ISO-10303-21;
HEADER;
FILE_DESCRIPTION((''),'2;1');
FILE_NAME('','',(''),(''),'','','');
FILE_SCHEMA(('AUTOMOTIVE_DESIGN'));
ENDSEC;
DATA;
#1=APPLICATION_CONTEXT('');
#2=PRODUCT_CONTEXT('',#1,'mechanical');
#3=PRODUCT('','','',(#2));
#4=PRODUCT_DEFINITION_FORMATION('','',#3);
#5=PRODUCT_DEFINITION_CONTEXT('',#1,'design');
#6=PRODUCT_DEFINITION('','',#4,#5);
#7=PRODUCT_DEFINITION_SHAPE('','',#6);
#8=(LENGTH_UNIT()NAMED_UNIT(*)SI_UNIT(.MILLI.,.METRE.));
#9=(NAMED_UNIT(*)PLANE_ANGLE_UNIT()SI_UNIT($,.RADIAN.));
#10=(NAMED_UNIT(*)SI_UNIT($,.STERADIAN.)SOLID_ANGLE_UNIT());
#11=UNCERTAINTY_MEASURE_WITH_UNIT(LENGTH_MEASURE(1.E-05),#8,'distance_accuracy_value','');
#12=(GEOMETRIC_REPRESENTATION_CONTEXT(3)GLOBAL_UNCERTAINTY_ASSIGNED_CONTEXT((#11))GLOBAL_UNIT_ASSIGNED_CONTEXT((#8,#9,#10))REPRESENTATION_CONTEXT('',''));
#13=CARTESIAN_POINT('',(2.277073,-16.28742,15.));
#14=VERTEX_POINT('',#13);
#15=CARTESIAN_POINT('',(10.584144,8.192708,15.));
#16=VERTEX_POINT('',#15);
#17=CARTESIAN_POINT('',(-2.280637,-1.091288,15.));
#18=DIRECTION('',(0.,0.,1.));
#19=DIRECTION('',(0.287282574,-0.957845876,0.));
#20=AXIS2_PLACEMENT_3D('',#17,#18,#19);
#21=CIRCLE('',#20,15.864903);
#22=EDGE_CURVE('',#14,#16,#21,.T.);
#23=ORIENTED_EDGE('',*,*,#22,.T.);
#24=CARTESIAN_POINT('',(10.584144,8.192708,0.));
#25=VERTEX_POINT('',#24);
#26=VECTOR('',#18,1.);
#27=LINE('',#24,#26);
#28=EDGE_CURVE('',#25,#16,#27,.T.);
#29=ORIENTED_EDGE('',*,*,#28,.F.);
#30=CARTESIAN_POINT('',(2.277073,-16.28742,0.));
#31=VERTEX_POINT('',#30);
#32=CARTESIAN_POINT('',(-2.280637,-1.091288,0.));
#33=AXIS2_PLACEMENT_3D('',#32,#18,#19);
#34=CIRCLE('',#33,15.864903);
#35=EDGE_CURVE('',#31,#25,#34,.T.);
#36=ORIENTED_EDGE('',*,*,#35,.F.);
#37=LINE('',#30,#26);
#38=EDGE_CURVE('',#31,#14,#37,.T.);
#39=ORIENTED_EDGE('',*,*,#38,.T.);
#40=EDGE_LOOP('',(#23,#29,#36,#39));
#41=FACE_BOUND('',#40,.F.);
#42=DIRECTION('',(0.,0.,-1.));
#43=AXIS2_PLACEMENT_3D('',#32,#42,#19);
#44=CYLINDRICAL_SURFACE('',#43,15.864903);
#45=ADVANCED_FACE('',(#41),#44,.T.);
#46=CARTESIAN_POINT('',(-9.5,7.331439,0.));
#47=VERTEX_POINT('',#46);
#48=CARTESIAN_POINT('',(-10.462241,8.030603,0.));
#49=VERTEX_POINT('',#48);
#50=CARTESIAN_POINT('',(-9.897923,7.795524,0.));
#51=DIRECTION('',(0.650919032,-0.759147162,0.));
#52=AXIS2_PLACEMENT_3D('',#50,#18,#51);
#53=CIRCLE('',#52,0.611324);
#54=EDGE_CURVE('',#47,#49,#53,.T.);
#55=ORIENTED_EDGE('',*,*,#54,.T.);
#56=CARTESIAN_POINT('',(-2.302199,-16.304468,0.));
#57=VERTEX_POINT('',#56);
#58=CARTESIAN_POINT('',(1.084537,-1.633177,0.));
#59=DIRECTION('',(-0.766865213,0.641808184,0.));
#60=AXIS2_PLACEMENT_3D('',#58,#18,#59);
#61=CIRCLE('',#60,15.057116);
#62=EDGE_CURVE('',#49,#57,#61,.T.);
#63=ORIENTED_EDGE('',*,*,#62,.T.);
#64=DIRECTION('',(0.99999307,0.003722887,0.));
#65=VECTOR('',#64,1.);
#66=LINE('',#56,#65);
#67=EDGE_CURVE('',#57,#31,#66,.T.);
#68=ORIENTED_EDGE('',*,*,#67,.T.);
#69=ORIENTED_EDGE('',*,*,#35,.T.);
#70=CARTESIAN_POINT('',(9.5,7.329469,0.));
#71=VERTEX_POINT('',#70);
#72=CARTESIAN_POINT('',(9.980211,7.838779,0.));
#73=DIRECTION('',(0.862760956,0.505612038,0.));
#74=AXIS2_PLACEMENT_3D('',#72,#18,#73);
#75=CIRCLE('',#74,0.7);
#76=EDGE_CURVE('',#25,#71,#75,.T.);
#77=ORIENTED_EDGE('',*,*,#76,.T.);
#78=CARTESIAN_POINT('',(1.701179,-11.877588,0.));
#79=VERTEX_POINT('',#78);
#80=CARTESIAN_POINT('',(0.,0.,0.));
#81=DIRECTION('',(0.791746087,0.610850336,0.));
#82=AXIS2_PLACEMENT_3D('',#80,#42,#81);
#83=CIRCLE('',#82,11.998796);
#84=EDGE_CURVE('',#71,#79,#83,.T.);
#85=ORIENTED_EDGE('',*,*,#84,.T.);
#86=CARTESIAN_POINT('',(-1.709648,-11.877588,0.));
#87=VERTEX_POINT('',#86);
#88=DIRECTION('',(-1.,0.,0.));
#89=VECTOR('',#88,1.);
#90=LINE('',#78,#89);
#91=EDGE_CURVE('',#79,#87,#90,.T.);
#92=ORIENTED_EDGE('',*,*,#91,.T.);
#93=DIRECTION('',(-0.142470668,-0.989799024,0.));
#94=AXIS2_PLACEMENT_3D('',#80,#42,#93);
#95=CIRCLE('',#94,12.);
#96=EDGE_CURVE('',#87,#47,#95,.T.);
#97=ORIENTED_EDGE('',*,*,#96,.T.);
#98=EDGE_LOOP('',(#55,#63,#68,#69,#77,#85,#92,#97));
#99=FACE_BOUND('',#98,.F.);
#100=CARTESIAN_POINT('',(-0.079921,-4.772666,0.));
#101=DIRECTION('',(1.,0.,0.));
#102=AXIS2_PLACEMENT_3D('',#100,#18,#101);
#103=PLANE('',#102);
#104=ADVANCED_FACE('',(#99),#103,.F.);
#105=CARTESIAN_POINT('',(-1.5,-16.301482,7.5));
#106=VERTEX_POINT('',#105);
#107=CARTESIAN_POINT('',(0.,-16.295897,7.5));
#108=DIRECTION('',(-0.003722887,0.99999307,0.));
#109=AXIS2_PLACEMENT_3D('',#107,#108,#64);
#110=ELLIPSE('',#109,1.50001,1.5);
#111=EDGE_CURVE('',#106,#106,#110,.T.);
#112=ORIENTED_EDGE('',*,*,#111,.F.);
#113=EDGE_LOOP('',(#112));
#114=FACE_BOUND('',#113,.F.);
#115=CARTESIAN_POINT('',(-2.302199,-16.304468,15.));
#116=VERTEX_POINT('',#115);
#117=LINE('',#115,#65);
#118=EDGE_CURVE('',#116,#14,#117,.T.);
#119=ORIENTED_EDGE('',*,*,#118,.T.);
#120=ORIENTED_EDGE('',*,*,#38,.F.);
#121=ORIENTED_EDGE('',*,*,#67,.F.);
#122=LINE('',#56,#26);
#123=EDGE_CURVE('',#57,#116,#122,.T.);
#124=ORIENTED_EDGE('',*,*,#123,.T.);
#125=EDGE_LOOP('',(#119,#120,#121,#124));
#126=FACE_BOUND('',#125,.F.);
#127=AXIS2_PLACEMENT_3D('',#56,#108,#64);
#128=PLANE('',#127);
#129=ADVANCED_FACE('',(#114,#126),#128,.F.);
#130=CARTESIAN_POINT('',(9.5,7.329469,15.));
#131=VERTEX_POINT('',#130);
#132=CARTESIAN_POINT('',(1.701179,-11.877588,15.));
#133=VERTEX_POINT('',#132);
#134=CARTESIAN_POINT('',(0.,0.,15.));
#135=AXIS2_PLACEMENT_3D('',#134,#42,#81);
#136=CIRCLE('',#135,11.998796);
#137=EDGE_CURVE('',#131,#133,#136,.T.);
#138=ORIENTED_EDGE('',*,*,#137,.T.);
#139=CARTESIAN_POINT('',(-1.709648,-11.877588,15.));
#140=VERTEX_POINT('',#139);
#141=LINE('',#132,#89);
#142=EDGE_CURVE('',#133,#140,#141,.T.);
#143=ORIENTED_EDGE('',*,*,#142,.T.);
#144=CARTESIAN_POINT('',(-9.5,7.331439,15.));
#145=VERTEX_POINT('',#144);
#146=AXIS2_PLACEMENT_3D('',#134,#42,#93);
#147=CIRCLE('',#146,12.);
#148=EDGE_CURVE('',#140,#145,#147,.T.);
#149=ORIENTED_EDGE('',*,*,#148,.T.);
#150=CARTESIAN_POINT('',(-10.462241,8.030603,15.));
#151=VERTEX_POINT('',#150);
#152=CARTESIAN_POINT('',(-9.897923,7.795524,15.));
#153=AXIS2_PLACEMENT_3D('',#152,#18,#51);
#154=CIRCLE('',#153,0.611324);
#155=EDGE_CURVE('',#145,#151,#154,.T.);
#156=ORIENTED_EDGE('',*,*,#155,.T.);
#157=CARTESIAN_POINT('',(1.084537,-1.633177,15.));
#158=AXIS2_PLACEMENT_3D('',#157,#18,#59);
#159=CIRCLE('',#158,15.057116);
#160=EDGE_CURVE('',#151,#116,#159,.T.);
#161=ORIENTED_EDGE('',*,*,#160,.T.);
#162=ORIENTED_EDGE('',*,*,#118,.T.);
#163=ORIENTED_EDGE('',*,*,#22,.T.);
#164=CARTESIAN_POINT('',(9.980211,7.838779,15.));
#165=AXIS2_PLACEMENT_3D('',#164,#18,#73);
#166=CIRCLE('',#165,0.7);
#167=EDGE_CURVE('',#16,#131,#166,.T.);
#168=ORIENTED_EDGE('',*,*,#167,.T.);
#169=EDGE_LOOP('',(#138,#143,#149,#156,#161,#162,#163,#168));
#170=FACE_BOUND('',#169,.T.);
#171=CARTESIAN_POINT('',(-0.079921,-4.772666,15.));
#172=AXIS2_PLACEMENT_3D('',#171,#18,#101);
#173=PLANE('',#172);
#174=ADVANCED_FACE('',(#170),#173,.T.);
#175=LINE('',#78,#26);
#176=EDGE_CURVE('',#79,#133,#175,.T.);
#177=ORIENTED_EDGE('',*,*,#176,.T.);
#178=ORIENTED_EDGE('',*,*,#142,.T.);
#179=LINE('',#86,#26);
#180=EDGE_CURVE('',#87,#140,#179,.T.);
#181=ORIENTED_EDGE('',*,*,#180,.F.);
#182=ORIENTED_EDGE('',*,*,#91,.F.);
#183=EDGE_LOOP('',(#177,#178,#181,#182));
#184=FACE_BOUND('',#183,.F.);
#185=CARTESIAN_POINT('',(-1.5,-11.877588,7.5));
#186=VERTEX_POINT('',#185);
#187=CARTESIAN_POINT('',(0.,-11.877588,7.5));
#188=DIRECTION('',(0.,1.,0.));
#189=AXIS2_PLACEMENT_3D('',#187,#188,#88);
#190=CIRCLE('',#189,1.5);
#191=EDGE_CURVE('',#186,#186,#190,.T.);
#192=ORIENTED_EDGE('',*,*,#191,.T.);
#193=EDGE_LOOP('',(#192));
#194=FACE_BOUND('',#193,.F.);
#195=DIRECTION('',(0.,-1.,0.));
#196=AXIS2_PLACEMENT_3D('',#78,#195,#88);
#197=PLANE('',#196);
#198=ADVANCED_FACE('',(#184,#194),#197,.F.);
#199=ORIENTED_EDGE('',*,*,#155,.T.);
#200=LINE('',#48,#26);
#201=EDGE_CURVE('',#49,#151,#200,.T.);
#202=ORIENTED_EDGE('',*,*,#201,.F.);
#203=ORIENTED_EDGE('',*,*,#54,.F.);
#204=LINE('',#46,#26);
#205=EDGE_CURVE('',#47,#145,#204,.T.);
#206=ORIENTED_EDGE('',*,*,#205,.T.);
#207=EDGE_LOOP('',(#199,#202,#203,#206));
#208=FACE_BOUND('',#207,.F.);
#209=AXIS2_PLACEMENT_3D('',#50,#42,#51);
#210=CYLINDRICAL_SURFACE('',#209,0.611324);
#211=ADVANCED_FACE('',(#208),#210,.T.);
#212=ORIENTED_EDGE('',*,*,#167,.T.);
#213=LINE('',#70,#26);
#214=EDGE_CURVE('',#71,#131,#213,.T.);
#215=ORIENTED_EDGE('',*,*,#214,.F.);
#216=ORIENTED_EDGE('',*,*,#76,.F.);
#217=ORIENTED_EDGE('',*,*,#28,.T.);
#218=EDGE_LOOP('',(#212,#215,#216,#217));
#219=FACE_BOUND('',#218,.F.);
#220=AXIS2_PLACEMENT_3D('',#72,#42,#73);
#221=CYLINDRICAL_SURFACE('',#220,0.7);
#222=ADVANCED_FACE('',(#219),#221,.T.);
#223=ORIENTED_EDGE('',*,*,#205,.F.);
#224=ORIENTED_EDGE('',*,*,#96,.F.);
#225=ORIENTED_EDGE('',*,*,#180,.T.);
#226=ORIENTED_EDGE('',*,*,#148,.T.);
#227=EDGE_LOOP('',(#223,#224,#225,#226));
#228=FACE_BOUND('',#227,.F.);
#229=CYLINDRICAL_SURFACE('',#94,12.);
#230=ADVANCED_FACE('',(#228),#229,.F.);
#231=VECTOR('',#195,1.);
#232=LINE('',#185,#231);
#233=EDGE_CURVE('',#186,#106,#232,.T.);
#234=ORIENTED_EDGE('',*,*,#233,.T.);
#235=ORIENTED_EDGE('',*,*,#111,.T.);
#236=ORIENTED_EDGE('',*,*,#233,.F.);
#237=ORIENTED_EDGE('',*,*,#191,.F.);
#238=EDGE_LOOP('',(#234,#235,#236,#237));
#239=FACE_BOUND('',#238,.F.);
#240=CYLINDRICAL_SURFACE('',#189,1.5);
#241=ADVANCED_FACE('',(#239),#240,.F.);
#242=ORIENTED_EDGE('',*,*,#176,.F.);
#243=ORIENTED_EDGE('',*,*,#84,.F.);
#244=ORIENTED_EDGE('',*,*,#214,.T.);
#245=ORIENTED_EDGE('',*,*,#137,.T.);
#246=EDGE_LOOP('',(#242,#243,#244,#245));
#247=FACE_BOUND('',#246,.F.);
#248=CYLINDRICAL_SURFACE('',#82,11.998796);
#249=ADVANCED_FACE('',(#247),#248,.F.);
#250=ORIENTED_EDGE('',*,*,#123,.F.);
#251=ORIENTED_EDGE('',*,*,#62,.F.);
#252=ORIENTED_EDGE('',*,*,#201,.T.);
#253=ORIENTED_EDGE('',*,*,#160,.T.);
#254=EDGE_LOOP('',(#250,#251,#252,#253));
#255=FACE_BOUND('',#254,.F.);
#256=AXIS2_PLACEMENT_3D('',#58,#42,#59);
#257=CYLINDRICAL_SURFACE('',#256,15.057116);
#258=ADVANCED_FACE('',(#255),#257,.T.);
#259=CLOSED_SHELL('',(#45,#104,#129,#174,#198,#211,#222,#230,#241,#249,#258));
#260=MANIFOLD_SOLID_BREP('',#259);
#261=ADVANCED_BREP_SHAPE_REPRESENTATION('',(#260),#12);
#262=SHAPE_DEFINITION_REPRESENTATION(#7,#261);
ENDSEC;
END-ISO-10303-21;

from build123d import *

# Parameters (mm, degrees)
F1_DEPTH = 15
F2_R     = 1.5
F3_DEPTH = 4.4278798556


# Not quite as in the source:
# - a feature names something its author has since deleted; it is built from what else it names


with BuildPart() as f1:
    # F0 (on Top) → F1 (new body)
    with BuildSketch(Plane.XY):
        with BuildLine():
            Line((1.7011785064, -11.877588293), (-1.7096480171, -11.877588293))
            ThreePointArc((-1.7096480171, -11.877588293), (-11.1202848878, -4.5099073176), (-9.5, 7.3314391493))
            ThreePointArc((-9.5, 7.3314391493), (-9.5385768198, 8.2900827327), (-10.4622412473, 8.0306030295))
            ThreePointArc((-10.4622412473, 8.0306030295), (-13.1913649606, -6.4201767786), (-2.3021989036, -16.3044681486))
            Line((-2.3021989036, -16.3044681486), (2.2770734892, -16.2874199147))
            ThreePointArc((2.2770734892, -16.2874199147), (12.7428435218, -6.1893456412), (10.5841437277, 8.1927078148))
            ThreePointArc((10.5841437277, 8.1927078148), (9.5441810303, 8.3863903947), (9.5, 7.3294687371))
            ThreePointArc((9.5, 7.3294687371), (11.1173000284, -4.5140615908), (1.7011785064, -11.877588293))
        make_face()
    extrude(amount=F1_DEPTH)

    # F2 (on face) → F3 (cut, through all)
    with BuildSketch(Plane(origin=(0, -11.877588293, 0), x_dir=(-1, 0, 0), z_dir=(0, 1, 0))):
        with Locations((0, 7.5)):
            Circle(F2_R)
    extrude(amount=-F3_DEPTH, mode=Mode.SUBTRACT)


solid = f1.part
